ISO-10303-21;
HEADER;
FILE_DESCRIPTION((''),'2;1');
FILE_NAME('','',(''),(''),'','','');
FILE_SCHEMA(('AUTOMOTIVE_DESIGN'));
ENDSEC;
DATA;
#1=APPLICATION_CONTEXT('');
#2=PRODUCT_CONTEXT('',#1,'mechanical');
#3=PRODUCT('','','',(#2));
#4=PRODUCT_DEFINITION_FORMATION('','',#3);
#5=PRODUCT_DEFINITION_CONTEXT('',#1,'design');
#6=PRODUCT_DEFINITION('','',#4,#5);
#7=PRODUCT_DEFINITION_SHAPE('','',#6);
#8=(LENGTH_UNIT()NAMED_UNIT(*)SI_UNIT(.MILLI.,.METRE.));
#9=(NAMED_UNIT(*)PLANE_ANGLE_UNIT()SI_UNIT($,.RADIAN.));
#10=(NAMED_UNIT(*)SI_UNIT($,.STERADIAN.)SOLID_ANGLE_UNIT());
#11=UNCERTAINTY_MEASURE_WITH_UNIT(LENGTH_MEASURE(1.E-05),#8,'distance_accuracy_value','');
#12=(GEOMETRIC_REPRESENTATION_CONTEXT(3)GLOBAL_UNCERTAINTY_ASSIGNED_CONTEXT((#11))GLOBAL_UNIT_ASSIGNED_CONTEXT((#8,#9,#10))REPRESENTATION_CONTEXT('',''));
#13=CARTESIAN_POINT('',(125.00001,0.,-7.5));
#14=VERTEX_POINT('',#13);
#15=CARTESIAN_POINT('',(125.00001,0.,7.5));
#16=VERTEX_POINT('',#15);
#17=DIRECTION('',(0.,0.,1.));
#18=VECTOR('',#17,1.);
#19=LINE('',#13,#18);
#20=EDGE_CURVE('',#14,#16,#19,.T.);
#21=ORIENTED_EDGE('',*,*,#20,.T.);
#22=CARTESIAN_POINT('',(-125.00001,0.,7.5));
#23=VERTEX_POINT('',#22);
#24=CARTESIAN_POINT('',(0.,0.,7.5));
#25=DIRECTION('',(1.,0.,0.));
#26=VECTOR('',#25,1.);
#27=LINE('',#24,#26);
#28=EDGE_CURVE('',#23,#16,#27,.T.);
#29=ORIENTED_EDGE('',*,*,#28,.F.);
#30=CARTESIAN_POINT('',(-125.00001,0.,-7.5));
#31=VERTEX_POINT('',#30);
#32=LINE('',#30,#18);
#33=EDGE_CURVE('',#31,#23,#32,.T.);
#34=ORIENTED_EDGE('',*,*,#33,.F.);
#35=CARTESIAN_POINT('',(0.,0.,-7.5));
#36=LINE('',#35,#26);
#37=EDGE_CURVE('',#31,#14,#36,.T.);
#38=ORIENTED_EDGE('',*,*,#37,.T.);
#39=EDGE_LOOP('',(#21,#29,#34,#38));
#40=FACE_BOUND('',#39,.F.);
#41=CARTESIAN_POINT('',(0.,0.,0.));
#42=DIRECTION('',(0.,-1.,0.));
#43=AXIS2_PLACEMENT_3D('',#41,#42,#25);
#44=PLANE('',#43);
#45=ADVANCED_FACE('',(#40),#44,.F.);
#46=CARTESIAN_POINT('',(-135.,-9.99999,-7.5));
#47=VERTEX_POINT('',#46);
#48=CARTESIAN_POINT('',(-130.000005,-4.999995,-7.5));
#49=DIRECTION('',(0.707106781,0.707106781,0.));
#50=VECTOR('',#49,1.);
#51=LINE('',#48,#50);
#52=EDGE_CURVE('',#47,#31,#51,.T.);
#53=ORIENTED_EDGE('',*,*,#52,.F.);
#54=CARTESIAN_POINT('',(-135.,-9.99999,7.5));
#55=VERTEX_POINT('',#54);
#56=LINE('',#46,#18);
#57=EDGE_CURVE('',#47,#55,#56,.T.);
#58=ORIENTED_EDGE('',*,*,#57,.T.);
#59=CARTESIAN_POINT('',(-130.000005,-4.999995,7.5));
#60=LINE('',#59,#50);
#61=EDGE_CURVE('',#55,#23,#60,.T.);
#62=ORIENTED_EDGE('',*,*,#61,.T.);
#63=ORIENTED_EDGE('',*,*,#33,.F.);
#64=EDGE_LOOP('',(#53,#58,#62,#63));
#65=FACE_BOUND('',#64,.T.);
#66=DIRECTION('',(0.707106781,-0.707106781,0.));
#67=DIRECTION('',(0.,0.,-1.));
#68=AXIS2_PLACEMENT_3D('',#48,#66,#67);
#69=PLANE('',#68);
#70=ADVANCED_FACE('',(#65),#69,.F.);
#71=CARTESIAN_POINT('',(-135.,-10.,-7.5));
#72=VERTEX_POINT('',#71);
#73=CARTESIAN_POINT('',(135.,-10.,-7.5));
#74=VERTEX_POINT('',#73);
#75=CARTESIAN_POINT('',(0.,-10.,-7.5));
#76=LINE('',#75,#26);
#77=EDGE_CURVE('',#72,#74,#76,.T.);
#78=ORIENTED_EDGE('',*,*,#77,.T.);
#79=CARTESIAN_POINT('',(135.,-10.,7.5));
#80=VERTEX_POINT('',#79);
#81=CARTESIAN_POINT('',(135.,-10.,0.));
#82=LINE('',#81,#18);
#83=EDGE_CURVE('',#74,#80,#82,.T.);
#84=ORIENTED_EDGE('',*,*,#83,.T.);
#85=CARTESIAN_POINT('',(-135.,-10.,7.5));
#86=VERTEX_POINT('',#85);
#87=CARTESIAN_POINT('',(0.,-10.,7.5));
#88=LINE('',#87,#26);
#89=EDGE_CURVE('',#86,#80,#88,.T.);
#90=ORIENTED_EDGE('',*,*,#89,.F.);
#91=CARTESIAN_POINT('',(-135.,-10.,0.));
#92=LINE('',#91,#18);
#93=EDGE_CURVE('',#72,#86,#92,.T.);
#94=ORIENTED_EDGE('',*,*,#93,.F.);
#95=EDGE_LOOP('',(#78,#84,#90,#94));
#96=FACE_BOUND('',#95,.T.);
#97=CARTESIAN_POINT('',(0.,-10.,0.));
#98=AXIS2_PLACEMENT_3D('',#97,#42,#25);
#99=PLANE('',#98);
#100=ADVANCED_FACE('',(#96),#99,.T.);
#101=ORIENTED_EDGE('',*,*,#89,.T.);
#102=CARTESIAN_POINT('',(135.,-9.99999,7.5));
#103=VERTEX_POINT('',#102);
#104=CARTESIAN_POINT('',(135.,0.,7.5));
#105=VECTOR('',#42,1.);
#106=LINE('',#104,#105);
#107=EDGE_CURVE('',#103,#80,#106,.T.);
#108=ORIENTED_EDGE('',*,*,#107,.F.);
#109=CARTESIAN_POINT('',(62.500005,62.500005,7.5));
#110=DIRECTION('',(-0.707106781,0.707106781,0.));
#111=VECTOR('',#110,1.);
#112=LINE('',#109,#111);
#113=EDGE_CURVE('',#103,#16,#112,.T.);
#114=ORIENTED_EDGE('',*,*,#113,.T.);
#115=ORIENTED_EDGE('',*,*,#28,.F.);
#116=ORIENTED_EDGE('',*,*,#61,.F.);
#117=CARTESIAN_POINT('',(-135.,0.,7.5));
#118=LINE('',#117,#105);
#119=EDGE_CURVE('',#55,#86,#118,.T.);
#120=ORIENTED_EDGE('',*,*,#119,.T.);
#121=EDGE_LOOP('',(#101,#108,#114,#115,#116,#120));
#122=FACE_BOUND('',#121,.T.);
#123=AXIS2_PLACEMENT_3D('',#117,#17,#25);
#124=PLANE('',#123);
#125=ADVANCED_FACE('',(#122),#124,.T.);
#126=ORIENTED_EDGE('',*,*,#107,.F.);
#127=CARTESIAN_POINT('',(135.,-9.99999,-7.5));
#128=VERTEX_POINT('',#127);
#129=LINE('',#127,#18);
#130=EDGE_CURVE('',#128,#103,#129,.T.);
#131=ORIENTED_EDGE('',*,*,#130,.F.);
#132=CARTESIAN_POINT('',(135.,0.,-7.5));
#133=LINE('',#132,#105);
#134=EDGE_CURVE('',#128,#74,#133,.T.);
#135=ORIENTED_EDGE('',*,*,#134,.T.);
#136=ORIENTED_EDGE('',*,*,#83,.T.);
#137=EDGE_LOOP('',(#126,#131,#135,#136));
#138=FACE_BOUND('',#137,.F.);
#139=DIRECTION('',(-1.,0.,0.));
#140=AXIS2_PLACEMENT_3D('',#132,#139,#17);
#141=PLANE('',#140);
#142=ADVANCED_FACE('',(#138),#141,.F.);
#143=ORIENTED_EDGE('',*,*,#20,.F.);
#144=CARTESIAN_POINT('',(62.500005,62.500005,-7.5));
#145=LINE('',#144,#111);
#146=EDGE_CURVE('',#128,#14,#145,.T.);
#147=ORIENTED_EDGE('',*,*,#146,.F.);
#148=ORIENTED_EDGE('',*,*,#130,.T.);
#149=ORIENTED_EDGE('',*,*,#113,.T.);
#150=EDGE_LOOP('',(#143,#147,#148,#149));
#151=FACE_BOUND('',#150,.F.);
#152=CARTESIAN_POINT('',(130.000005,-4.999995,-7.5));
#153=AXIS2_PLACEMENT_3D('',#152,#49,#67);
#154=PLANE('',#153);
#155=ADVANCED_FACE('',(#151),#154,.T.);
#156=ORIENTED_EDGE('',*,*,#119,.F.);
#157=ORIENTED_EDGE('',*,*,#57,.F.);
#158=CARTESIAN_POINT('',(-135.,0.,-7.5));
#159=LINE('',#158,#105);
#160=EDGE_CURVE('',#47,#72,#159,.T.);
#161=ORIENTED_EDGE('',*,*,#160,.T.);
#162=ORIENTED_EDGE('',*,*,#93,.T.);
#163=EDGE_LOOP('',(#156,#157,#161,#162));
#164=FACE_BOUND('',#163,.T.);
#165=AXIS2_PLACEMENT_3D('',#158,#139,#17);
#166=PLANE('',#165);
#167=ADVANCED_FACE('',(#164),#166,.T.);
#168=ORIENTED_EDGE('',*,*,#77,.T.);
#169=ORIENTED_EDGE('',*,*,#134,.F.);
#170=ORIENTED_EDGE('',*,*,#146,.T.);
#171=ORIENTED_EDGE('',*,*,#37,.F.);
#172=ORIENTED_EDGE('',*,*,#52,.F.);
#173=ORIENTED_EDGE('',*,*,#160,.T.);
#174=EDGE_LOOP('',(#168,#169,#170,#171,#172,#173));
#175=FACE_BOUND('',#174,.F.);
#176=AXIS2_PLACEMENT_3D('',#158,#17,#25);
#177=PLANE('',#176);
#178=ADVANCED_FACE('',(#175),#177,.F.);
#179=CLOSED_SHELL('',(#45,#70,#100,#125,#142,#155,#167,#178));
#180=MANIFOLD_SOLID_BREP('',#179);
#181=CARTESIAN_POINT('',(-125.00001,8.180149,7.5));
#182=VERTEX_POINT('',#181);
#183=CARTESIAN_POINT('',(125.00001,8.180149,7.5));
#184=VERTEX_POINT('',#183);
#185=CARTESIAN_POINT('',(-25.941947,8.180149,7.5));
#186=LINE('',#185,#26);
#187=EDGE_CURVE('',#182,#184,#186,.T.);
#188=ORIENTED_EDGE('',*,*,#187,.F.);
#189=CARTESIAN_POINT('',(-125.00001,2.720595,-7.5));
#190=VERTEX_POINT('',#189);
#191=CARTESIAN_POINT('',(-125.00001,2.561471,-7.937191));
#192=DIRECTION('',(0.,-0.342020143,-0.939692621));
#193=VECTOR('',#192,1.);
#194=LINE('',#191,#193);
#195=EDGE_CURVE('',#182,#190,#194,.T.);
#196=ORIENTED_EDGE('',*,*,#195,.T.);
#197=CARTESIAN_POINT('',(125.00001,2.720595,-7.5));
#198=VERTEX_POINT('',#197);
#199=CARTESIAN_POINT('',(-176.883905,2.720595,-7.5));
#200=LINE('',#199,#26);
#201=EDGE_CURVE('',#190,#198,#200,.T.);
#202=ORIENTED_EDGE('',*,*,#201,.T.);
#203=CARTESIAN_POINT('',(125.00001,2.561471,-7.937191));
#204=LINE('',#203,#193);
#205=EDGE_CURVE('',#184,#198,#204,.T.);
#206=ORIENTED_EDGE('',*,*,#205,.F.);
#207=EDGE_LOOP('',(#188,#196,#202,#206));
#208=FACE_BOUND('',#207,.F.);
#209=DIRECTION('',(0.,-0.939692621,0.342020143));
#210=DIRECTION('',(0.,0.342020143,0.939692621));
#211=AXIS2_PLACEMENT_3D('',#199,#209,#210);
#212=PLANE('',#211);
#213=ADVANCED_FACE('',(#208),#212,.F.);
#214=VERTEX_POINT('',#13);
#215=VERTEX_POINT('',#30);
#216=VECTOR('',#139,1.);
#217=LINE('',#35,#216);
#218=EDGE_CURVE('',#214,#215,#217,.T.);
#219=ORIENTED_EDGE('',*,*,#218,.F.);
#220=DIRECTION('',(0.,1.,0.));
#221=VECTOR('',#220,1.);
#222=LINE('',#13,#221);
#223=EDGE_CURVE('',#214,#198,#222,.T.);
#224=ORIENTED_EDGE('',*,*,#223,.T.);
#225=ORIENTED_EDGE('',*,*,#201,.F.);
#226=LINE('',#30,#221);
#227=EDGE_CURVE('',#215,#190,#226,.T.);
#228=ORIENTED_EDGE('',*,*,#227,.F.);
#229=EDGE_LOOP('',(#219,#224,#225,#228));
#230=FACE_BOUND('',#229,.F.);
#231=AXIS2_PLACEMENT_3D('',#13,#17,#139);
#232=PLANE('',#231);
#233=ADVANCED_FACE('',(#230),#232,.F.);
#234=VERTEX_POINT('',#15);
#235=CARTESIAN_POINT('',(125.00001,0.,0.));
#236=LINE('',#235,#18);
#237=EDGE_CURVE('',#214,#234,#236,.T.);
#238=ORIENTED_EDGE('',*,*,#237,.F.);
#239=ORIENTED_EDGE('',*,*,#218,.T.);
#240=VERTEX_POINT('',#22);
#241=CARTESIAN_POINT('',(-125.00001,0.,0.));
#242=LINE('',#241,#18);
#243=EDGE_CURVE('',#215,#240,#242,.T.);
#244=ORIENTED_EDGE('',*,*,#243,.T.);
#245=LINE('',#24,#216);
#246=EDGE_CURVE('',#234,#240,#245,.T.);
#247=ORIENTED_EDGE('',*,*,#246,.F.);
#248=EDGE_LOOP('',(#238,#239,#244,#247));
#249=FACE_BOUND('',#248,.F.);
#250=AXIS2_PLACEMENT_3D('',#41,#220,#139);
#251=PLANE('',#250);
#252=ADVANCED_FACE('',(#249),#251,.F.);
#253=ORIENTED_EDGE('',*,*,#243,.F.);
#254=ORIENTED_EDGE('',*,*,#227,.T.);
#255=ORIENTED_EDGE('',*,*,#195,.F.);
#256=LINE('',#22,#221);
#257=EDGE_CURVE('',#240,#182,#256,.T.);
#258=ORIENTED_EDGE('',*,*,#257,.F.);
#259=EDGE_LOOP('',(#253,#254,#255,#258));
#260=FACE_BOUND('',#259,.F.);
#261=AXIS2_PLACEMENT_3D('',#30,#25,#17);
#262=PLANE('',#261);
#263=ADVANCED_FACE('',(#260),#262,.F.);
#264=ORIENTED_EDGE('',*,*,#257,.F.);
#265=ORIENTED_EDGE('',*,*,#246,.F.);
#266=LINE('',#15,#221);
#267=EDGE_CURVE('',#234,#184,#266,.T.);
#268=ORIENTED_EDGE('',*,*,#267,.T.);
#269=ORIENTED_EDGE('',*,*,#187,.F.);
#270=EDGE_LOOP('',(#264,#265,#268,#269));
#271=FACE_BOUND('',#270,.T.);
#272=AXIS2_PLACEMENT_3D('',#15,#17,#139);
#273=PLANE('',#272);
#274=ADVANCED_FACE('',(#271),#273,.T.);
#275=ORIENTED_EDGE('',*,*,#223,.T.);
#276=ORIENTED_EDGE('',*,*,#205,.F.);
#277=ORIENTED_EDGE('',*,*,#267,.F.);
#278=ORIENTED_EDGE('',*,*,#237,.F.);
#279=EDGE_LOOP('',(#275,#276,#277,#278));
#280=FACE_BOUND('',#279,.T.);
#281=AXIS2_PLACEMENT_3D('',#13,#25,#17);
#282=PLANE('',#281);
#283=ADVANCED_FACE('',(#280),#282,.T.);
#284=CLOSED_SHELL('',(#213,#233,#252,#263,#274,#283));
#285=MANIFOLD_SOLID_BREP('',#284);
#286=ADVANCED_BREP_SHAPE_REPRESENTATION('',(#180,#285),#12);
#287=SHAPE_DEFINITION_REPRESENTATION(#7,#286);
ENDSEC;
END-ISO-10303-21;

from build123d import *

# Parameters (mm, degrees)
F0_W        = 270
F0_H        = 15
F1_DEPTH    = 10
F2_SIZE     = 9.99999
F3_W        = 250.00002
F3_H        = 15
F4_DEPTH    = 10
F5_T1_DEPTH = 353.767809302


# Not quite as in the source:
# - a fillet or chamfer that OpenCascade refuses, or shapes differently, is made with other operations: its cross-section is extruded or revolved along the edge and cut away or added
# - a fillet or chamfer is up to 0.001 mm smaller than in the source, because OpenCascade refuses the exact size
# - a feature of the source that left no trace in its solid (it failed there, or was rolled back) is left out


with BuildPart() as f1:
    # F0 (on Front) → F1 (new body)
    with BuildSketch(Plane.XZ):
        Rectangle(F0_W, F0_H)
    extrude(amount=F1_DEPTH)

    # F2 (size 10 in the source; OpenCascade refuses exactly that, so slightly less here)
    f2_edges = [f1.edges().sort_by_distance(p)[0] for p in [
        (135, 0, 0),
        (-135, 0, 0),
    ]]
    chamfer(f2_edges, length=F2_SIZE)


with BuildPart() as f4:
    # F3 (on face) → F4 (new body)
    with BuildSketch(Plane(origin=(0, 0, 0), x_dir=(-1, 0, 0), z_dir=(0, 1, 0))):
        Rectangle(F3_W, F3_H)
    extrude(amount=F4_DEPTH)

    # F5: chamfer of 20 x 7.2794046853 on 1 edges, made by hand

    # F5_s2 → F5_t1 (cut)
    with BuildSketch(Plane.YZ.offset(-176.883904651)):
        Polygon((2.7205953147, -7.5), (10, 12.5), (10, -7.5), align=None)
    extrude(amount=F5_T1_DEPTH, mode=Mode.SUBTRACT)


solid = Compound([f1.part, f4.part])
